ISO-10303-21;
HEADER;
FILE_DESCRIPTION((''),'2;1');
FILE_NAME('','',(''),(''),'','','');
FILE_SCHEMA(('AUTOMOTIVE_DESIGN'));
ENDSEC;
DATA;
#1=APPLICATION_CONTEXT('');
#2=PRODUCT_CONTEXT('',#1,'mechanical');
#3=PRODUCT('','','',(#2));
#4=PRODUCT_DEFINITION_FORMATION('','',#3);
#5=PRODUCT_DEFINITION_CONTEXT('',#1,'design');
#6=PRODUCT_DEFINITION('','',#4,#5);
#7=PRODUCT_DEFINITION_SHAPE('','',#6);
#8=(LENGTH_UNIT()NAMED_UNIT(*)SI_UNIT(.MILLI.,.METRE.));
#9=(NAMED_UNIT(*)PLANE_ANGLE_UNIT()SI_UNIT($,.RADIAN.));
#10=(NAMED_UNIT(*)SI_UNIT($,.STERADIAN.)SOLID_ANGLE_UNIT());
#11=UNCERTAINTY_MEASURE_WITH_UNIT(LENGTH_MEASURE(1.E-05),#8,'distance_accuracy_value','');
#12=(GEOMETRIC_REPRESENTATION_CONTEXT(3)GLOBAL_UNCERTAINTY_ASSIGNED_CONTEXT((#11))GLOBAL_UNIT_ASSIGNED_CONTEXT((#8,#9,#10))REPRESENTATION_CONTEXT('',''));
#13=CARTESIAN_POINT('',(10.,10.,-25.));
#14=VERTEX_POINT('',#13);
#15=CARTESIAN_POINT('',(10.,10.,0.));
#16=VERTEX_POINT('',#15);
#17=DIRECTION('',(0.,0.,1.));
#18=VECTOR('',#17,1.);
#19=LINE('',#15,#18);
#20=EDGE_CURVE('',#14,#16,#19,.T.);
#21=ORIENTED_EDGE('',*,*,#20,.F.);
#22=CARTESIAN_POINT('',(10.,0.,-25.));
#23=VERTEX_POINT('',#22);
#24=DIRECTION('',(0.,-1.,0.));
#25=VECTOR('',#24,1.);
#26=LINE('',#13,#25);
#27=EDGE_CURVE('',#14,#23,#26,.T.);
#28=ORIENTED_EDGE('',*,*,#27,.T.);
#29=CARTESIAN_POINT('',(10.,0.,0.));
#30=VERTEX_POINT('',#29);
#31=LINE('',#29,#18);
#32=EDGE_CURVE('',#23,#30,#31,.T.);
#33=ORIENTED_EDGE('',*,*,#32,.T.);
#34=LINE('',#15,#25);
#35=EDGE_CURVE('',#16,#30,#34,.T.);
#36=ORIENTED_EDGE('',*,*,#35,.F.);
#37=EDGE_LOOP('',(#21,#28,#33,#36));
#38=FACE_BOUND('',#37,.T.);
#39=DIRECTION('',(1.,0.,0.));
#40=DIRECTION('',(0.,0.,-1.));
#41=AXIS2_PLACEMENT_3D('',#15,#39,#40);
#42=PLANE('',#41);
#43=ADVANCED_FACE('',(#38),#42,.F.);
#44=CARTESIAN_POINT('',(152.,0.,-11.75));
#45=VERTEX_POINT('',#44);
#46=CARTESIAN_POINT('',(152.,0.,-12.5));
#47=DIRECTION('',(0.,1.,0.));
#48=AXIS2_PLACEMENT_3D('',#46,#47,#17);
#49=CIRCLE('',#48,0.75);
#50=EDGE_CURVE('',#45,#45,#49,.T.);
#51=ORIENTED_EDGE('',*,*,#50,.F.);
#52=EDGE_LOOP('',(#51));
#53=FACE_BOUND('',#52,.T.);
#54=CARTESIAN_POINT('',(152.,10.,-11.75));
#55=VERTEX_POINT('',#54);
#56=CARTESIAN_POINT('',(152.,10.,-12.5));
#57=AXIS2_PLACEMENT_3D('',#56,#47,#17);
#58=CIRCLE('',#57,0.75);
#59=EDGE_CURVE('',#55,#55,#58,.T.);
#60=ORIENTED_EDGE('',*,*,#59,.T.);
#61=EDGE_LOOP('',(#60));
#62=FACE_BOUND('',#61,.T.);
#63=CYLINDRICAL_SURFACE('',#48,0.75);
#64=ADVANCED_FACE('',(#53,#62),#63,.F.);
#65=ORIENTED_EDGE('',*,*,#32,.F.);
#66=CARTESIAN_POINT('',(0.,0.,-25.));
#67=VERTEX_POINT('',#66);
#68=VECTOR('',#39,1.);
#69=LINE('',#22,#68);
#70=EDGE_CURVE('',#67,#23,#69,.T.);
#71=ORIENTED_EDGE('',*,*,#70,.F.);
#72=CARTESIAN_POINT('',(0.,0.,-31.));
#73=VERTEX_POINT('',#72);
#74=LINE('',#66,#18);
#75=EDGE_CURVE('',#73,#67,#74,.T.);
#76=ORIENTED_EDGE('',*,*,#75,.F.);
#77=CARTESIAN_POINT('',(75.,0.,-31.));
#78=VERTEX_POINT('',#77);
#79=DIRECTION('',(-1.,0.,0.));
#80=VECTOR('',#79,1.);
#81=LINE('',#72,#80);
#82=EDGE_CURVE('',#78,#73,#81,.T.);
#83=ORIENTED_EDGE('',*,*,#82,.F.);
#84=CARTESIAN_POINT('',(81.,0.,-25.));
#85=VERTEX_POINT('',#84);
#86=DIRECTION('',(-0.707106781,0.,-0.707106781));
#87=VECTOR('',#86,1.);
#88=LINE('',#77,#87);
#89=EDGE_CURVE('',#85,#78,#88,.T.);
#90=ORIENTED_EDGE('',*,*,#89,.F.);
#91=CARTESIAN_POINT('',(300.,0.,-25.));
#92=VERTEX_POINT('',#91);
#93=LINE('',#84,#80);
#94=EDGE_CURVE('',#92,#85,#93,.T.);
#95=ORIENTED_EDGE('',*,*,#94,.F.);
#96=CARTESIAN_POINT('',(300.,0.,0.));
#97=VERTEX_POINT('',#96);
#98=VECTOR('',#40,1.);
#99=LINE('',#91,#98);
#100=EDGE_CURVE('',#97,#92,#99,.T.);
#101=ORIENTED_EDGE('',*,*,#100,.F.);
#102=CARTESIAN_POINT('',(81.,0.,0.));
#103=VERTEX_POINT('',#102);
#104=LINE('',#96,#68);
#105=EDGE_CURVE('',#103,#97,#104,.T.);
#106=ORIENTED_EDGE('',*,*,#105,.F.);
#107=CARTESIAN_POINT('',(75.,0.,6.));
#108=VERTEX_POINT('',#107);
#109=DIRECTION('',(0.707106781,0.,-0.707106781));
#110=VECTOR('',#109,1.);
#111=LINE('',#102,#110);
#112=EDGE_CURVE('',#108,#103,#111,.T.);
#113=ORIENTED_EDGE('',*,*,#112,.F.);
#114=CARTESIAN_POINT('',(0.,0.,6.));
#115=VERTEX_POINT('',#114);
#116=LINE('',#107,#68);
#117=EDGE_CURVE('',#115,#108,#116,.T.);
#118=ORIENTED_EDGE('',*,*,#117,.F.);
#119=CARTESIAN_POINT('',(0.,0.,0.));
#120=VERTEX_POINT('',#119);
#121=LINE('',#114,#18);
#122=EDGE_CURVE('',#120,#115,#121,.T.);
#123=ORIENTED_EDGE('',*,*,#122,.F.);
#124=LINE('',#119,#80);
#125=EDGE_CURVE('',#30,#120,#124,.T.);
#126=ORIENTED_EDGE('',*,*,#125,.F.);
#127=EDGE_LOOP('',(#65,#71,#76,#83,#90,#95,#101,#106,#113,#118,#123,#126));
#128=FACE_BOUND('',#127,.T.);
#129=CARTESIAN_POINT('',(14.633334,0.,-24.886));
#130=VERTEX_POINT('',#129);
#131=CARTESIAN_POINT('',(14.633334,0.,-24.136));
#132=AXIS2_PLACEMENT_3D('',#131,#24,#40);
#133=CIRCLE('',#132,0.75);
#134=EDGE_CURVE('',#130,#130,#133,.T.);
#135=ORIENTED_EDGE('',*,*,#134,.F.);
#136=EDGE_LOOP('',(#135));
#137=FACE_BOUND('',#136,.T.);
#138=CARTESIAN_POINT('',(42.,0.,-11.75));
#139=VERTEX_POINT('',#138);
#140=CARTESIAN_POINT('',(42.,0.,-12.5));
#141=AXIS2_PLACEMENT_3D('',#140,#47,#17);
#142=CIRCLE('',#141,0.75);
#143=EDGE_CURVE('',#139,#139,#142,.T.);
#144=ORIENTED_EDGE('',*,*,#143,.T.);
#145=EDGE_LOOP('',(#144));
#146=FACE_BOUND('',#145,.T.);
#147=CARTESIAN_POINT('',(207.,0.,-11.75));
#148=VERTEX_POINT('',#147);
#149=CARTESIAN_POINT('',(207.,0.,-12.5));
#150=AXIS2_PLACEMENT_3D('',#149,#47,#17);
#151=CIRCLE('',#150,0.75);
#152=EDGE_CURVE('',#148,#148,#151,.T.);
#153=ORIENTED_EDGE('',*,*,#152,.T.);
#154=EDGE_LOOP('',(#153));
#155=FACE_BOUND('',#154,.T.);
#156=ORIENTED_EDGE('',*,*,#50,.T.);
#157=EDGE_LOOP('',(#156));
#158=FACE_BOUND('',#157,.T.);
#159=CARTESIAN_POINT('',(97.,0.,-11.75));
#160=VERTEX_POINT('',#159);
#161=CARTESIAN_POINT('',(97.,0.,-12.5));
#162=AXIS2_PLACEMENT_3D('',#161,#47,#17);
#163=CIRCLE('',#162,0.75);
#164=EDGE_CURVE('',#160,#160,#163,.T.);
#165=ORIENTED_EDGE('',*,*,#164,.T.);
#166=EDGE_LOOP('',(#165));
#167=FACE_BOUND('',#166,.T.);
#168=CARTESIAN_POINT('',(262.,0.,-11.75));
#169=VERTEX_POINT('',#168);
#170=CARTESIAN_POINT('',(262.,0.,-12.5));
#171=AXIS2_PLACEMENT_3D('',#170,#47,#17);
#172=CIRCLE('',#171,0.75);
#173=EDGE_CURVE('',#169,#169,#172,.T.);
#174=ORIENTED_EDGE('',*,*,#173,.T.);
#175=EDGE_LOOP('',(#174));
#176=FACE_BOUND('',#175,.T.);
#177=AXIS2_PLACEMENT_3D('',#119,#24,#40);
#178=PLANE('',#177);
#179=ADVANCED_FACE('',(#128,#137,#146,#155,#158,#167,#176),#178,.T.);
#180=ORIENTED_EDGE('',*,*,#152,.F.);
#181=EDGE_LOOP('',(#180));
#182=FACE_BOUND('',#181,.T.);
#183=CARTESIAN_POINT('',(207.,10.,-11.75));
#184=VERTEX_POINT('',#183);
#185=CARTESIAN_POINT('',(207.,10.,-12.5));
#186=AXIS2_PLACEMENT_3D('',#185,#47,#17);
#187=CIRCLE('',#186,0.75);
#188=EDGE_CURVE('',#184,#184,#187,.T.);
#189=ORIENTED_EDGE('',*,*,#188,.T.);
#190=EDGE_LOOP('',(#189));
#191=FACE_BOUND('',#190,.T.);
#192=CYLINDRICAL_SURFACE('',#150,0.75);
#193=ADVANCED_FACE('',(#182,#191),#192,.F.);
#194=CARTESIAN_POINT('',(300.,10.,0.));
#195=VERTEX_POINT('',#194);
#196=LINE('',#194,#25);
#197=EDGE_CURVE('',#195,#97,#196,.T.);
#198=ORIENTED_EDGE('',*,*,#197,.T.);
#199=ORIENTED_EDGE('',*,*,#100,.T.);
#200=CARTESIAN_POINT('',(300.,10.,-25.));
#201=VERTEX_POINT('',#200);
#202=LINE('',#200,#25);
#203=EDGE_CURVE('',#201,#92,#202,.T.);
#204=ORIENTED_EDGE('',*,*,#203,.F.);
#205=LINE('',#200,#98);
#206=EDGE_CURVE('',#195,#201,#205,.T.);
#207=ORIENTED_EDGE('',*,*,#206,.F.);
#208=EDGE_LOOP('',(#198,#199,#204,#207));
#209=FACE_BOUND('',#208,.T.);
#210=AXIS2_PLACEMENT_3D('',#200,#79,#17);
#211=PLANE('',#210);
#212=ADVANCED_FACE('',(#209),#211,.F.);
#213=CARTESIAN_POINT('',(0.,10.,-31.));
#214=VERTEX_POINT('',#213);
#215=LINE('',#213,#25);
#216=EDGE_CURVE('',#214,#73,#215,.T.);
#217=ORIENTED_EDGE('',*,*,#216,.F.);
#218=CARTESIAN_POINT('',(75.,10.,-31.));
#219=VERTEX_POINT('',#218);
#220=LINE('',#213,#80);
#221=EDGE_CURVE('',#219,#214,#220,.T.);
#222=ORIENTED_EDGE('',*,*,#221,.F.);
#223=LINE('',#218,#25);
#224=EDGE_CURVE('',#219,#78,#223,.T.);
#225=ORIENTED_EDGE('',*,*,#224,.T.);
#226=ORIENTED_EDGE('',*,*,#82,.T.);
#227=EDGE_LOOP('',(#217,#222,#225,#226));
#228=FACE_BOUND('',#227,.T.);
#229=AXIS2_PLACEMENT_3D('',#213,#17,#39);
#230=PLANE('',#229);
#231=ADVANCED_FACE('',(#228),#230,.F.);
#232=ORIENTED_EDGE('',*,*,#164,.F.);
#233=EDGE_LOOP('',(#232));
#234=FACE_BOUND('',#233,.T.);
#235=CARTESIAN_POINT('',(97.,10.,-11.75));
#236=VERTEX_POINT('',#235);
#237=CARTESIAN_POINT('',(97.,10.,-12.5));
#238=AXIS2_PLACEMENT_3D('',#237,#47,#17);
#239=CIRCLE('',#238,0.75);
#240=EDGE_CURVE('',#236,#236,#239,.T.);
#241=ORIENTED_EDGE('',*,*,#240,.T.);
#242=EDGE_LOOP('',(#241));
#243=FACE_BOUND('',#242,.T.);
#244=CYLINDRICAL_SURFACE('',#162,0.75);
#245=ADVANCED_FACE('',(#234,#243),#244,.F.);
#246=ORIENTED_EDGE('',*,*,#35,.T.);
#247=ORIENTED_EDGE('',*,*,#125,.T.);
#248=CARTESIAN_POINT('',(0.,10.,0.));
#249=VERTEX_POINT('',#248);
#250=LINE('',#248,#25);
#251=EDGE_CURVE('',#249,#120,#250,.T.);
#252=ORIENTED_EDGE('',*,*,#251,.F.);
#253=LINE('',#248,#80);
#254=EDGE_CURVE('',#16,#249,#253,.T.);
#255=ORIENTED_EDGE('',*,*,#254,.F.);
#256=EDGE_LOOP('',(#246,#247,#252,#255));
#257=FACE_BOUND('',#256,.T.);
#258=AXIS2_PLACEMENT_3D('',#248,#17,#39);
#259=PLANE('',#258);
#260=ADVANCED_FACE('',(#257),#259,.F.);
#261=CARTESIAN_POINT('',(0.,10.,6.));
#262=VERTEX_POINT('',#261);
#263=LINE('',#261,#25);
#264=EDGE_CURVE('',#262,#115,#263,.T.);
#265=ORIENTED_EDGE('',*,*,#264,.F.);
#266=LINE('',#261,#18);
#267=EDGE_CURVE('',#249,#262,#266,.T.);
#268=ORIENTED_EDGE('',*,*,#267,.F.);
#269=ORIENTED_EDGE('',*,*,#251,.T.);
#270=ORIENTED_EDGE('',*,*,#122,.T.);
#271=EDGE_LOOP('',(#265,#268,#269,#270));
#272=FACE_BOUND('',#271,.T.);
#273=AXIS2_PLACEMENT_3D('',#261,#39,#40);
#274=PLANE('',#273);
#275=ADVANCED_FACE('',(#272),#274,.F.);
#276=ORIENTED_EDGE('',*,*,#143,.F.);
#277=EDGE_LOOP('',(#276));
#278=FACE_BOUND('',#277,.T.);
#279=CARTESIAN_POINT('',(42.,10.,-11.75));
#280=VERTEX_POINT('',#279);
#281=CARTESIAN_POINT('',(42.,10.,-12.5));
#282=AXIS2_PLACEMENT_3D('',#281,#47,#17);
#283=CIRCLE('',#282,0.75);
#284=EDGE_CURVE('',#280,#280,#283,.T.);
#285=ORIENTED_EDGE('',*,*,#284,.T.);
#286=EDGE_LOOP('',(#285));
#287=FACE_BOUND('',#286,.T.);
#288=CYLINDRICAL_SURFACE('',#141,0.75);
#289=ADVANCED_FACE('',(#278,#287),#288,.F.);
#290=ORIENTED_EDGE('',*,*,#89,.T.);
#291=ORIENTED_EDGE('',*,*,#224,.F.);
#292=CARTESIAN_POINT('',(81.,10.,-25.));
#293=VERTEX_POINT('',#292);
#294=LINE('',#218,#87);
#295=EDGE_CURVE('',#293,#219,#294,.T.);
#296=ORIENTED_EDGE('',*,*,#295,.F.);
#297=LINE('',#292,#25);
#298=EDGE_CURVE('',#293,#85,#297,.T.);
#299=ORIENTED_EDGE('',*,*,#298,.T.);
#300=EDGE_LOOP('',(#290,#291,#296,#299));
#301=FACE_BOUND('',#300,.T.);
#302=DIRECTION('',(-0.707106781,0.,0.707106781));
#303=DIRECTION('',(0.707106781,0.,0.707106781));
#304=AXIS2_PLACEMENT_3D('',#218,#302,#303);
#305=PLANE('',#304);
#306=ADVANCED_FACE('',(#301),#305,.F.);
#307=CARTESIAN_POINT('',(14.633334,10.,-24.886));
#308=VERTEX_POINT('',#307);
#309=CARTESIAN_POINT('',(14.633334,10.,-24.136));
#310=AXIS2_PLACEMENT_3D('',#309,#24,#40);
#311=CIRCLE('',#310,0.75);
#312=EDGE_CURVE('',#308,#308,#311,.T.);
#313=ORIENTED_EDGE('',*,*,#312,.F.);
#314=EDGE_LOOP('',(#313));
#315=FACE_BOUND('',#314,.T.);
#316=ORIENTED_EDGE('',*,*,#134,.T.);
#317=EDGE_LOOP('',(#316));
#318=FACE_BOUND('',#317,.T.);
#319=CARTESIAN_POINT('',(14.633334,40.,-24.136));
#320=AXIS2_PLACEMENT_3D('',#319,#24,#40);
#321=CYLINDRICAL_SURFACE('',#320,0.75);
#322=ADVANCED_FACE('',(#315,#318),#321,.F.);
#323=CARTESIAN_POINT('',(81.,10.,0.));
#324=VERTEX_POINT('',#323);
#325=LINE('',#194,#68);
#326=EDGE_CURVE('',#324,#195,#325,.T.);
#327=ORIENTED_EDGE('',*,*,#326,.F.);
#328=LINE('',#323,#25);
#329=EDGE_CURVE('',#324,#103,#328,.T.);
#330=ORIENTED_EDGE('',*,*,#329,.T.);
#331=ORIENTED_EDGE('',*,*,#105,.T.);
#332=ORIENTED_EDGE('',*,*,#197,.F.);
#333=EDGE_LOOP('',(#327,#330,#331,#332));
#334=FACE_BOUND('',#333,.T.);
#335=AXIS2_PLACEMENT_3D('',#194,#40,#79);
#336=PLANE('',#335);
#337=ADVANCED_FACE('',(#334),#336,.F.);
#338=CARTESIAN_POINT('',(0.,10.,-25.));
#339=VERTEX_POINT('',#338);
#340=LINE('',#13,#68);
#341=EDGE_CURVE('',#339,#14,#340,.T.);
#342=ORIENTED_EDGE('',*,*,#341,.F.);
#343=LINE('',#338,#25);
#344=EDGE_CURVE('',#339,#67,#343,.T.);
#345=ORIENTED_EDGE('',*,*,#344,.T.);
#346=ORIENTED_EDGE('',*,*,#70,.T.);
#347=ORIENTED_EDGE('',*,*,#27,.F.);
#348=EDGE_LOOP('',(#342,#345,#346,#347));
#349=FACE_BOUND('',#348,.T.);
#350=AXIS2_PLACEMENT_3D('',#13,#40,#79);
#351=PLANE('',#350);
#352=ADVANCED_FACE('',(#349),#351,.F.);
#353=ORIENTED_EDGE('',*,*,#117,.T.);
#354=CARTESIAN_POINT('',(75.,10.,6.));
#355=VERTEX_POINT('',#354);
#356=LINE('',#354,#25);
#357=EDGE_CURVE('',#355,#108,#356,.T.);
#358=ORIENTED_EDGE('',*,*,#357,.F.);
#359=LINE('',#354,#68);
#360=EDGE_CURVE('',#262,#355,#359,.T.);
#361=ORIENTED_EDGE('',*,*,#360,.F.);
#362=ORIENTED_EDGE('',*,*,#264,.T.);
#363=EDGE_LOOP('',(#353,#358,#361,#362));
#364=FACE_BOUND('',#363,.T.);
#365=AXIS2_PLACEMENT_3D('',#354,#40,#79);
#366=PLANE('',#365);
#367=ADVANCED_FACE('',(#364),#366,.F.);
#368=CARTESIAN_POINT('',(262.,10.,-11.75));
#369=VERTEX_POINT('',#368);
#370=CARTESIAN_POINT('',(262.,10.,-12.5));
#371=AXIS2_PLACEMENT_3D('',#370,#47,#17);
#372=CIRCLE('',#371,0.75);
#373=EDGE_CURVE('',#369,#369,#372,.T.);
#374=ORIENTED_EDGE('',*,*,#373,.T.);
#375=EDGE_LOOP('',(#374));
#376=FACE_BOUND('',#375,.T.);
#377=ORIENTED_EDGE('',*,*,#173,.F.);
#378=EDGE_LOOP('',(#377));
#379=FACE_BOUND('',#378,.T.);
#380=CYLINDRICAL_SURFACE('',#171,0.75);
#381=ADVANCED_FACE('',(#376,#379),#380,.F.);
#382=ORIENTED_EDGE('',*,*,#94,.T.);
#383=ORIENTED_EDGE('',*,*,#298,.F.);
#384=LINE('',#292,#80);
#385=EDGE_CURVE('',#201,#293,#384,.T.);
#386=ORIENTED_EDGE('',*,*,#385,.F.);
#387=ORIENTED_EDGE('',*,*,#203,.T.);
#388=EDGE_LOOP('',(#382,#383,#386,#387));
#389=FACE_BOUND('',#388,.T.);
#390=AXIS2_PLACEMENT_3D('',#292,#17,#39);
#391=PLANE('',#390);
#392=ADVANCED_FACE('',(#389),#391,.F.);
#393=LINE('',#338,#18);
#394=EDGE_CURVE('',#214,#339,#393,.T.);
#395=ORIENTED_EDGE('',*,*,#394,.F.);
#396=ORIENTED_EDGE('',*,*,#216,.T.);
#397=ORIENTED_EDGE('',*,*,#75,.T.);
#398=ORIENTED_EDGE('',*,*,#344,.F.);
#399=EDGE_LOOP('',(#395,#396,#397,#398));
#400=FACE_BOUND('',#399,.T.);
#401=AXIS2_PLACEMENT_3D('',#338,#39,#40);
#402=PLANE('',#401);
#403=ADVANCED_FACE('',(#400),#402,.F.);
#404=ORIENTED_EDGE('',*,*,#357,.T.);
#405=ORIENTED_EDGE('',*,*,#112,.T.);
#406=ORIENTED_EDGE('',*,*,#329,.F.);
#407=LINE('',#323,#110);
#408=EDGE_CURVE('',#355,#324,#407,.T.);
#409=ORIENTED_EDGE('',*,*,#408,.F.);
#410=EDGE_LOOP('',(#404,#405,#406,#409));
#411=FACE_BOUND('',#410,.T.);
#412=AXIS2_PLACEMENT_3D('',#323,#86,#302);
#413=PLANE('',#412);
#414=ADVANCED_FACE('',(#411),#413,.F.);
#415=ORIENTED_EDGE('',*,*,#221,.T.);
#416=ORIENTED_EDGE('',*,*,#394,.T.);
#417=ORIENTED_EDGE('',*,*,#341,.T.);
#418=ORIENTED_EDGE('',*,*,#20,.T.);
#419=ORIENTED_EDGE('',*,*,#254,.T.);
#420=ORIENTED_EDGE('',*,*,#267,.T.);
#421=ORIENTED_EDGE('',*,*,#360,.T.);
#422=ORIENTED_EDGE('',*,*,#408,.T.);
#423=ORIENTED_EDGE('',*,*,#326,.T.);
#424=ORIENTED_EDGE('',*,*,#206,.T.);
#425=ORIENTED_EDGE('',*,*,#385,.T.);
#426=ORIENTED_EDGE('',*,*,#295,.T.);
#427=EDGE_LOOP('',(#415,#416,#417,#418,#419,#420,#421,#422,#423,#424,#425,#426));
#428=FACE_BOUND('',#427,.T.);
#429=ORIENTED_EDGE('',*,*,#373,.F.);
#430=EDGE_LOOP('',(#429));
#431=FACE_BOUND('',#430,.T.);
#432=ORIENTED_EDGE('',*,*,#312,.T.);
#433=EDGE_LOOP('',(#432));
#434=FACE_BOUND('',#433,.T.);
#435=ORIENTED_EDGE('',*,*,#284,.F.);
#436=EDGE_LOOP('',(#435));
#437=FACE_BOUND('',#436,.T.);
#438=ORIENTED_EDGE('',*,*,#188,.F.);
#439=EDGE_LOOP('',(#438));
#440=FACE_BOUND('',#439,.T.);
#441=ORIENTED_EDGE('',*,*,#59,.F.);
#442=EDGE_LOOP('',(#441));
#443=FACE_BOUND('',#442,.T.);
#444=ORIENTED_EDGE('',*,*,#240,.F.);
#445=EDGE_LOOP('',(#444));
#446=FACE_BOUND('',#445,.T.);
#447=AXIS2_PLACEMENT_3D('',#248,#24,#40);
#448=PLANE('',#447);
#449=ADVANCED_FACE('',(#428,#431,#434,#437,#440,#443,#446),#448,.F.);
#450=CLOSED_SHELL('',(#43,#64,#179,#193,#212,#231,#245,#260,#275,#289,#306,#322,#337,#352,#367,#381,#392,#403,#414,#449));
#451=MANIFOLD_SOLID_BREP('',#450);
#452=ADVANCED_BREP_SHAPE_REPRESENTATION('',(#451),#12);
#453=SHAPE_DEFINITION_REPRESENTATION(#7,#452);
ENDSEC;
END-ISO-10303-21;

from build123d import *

# Parameters (mm, degrees)
EXTRUDE_1_DEPTH        = 10
SKETCH_2_R             = 0.75
CUT_EXTRUDE_1_DEPTH    = 302.763152157
PATTERN_LINEAR_1_COUNT = 5
PATTERN_LINEAR_1_PITCH = 55
OTHER_1_OUTLINE_R      = 0.75
OTHER_1_DEPTH          = 10


# Read off the part's stored shape, not the designer's step: Отверстие1
with BuildPart() as part:
    # Эскиз1 → Бобышка-Вытянуть1 (new body)
    with BuildSketch(Plane(origin=(0, 0, 0), x_dir=(1, 0, 0), z_dir=(0, 1, 0))):
        Polygon((0, 31), (75, 31), (81, 25), (300, 25), (300, 0), (81, 0), (75, -6), (0, -6), (0, 0), (10, 0), (10, 25), (0, 25), align=None)
    extrude(amount=EXTRUDE_1_DEPTH)

    # Эскиз2 → Вырез-Вытянуть1 (cut, through all)
    with BuildSketch(Plane(origin=(0, 10, 0), x_dir=(1, 0, 0), z_dir=(0, 1, 0))):
        with Locations(Location((42, 12.5, 0), (0, 0, 270))):
            Circle(SKETCH_2_R)
    cut_extrude_1 = extrude(amount=-CUT_EXTRUDE_1_DEPTH, mode=Mode.SUBTRACT)

    # Линейный массив1: Вырез-Вытянуть1 ×5
    with Locations(*[(i * PATTERN_LINEAR_1_PITCH, 0, 0) for i in range(1, PATTERN_LINEAR_1_COUNT)]):
        add(cut_extrude_1, mode=Mode.SUBTRACT)

    # Отверстие1 outline → Отверстие1 (cut)
    with BuildSketch(Plane(origin=(0, 0, 0), x_dir=(1, 0, 0), z_dir=(0, 1, 0))):
        with Locations((14.633333886, 24.136000106)):
            Circle(OTHER_1_OUTLINE_R)
    extrude(amount=OTHER_1_DEPTH, mode=Mode.SUBTRACT)


solid = part.part
